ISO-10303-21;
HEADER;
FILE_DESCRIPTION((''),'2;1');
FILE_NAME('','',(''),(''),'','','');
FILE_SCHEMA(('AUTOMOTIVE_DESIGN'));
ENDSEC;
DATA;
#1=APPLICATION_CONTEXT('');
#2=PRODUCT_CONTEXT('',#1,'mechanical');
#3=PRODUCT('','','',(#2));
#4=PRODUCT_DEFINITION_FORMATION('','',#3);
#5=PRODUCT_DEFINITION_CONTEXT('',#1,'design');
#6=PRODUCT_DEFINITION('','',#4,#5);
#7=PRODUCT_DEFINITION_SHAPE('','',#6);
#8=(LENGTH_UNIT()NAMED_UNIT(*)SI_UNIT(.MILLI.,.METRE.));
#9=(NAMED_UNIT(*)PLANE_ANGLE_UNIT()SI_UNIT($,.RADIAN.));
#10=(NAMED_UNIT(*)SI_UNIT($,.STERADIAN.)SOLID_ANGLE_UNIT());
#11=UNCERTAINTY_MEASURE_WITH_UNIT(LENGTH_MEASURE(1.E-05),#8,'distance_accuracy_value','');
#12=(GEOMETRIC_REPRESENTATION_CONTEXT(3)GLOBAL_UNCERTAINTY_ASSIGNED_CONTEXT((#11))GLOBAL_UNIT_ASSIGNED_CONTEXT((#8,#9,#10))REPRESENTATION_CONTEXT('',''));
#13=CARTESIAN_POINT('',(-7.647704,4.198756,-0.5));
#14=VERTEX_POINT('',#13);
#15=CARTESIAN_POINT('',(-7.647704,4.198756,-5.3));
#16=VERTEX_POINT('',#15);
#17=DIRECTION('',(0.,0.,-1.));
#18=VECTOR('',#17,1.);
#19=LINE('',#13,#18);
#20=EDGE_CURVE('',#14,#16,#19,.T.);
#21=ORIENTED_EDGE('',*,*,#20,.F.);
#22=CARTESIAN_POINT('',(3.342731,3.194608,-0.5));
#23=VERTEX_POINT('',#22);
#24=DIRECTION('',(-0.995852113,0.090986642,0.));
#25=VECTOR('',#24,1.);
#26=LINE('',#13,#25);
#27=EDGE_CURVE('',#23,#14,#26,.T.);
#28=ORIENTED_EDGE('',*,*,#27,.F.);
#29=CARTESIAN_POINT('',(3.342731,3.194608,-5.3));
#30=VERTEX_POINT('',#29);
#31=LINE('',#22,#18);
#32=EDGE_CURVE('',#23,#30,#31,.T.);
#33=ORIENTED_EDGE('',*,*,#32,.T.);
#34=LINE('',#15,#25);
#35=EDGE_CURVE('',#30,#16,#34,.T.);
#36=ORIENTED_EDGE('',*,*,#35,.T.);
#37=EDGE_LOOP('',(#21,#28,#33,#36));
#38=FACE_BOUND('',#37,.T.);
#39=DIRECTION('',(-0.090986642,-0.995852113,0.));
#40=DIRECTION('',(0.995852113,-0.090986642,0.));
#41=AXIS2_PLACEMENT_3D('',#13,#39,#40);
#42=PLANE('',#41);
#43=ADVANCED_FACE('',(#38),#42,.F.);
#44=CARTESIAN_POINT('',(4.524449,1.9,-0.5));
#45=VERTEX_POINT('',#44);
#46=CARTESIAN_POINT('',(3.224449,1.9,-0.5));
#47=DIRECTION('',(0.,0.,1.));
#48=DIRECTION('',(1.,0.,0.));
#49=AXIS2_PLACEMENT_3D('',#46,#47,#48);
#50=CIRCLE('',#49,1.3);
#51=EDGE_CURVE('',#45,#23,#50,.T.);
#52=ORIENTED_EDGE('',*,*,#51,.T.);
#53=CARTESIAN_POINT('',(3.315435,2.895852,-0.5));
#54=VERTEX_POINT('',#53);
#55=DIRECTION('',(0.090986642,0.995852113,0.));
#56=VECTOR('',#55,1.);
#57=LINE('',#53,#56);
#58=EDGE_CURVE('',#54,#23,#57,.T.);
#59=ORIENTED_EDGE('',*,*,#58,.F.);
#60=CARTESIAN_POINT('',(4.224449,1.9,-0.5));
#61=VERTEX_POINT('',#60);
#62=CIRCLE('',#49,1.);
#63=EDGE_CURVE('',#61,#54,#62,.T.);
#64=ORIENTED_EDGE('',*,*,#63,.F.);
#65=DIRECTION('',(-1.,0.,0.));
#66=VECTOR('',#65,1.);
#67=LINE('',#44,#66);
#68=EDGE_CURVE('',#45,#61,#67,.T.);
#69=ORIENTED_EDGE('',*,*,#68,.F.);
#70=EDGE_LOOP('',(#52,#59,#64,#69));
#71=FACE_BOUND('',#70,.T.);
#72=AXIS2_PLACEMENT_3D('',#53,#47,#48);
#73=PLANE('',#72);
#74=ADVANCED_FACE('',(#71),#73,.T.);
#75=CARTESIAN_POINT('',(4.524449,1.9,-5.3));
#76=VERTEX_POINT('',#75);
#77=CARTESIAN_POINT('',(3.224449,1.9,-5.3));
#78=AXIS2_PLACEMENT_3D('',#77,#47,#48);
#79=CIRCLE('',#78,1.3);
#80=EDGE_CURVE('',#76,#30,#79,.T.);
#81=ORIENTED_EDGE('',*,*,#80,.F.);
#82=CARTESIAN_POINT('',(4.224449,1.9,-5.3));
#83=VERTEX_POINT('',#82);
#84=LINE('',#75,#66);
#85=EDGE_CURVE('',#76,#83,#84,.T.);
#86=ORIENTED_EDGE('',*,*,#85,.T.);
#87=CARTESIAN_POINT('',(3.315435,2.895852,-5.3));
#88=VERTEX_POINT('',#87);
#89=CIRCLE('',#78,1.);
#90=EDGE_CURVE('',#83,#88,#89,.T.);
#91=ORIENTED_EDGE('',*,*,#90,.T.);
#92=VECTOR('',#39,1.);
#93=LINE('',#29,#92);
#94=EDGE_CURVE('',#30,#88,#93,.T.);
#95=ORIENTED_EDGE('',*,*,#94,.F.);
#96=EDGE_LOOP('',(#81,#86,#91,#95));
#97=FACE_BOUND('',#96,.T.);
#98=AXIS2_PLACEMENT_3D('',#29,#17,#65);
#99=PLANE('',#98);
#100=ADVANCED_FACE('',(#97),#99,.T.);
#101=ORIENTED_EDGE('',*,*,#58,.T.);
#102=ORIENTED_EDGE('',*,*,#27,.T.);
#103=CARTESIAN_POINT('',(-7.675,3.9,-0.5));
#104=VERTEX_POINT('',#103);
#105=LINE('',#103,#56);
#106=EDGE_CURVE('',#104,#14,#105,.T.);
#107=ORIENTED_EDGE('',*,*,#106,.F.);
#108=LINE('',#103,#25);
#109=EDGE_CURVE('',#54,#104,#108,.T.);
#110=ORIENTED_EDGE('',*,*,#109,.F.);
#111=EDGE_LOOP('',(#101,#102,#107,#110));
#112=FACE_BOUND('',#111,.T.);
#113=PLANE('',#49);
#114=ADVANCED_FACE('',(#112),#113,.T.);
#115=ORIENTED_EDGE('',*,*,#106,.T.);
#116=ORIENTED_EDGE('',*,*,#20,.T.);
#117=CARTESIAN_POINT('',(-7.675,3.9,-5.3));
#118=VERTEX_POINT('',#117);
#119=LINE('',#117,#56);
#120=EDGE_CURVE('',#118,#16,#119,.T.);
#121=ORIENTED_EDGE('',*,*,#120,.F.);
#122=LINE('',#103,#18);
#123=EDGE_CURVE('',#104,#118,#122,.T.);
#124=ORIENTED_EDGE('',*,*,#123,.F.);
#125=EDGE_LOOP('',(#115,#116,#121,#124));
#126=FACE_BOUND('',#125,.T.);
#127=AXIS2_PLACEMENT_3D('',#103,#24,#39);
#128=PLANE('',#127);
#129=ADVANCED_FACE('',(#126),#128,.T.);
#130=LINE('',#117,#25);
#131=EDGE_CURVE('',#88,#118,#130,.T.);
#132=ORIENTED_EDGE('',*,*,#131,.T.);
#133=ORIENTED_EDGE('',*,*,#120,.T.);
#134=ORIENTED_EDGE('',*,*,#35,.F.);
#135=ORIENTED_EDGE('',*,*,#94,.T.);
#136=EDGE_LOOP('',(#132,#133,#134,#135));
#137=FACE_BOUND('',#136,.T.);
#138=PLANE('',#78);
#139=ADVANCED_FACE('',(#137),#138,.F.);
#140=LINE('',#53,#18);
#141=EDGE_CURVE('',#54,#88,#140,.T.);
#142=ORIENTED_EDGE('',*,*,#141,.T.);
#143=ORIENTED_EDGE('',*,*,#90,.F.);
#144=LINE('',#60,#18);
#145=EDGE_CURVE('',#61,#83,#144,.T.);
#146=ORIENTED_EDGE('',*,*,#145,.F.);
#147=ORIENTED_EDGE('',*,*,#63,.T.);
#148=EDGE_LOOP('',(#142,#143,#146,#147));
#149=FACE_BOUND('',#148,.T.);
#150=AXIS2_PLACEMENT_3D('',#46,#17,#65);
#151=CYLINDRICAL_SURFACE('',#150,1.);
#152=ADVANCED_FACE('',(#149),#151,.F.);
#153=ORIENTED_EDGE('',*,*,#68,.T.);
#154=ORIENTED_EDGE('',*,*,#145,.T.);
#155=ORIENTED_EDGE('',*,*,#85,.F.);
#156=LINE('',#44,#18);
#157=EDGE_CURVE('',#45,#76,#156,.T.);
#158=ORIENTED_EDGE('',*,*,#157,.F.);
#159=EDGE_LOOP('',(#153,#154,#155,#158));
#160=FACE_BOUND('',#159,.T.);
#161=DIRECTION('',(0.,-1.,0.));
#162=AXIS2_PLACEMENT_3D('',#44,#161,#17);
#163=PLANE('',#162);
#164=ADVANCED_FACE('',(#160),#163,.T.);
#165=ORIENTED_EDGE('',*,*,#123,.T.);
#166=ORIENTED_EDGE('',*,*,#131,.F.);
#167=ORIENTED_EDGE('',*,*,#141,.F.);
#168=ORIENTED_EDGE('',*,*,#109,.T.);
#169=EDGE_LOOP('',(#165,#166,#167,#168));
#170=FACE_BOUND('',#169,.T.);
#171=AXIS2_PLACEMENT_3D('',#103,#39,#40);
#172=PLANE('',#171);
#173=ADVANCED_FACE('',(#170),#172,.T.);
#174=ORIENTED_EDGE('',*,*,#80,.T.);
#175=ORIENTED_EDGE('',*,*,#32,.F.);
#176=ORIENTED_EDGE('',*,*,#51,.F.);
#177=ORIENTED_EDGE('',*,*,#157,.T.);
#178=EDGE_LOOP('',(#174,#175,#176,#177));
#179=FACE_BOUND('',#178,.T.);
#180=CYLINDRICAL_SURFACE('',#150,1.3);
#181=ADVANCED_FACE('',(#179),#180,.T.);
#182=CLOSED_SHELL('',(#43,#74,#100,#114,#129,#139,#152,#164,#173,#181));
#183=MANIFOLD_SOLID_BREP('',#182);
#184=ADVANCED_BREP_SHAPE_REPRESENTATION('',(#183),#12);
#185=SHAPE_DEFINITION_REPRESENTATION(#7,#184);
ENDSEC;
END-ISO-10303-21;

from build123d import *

# Parameters (mm, degrees)
BASE_FLANGE1_DEPTH      = 2.4
BASE_FLANGE1_DEPTH_BACK = 2.4


# Sheet-metal steps are written as plain solids
with BuildPart() as part:
    # Sketch2 → Base-Flange1 (new, two sides: drawn at the far end of the back side and taken through both)
    with BuildSketch(Plane.XY.offset(-2.9).offset(-BASE_FLANGE1_DEPTH_BACK)):
        with BuildLine():
            Line((-7.675, 3.9), (3.315435248, 2.895852113))
            ThreePointArc((3.315435248, 2.895852113), (3.963023803, 2.574171105), (4.224448606, 1.9))
            Line((4.224448606, 1.9), (4.524448606, 1.9))
            ThreePointArc((4.524448606, 1.9), (4.184596362, 2.776422437), (3.342731241, 3.194607747))
            Line((3.342731241, 3.194607747), (-7.647704007, 4.198755634))
            Line((-7.647704007, 4.198755634), (-7.675, 3.9))
        make_face()
    extrude(amount=BASE_FLANGE1_DEPTH + BASE_FLANGE1_DEPTH_BACK)


solid = part.part
